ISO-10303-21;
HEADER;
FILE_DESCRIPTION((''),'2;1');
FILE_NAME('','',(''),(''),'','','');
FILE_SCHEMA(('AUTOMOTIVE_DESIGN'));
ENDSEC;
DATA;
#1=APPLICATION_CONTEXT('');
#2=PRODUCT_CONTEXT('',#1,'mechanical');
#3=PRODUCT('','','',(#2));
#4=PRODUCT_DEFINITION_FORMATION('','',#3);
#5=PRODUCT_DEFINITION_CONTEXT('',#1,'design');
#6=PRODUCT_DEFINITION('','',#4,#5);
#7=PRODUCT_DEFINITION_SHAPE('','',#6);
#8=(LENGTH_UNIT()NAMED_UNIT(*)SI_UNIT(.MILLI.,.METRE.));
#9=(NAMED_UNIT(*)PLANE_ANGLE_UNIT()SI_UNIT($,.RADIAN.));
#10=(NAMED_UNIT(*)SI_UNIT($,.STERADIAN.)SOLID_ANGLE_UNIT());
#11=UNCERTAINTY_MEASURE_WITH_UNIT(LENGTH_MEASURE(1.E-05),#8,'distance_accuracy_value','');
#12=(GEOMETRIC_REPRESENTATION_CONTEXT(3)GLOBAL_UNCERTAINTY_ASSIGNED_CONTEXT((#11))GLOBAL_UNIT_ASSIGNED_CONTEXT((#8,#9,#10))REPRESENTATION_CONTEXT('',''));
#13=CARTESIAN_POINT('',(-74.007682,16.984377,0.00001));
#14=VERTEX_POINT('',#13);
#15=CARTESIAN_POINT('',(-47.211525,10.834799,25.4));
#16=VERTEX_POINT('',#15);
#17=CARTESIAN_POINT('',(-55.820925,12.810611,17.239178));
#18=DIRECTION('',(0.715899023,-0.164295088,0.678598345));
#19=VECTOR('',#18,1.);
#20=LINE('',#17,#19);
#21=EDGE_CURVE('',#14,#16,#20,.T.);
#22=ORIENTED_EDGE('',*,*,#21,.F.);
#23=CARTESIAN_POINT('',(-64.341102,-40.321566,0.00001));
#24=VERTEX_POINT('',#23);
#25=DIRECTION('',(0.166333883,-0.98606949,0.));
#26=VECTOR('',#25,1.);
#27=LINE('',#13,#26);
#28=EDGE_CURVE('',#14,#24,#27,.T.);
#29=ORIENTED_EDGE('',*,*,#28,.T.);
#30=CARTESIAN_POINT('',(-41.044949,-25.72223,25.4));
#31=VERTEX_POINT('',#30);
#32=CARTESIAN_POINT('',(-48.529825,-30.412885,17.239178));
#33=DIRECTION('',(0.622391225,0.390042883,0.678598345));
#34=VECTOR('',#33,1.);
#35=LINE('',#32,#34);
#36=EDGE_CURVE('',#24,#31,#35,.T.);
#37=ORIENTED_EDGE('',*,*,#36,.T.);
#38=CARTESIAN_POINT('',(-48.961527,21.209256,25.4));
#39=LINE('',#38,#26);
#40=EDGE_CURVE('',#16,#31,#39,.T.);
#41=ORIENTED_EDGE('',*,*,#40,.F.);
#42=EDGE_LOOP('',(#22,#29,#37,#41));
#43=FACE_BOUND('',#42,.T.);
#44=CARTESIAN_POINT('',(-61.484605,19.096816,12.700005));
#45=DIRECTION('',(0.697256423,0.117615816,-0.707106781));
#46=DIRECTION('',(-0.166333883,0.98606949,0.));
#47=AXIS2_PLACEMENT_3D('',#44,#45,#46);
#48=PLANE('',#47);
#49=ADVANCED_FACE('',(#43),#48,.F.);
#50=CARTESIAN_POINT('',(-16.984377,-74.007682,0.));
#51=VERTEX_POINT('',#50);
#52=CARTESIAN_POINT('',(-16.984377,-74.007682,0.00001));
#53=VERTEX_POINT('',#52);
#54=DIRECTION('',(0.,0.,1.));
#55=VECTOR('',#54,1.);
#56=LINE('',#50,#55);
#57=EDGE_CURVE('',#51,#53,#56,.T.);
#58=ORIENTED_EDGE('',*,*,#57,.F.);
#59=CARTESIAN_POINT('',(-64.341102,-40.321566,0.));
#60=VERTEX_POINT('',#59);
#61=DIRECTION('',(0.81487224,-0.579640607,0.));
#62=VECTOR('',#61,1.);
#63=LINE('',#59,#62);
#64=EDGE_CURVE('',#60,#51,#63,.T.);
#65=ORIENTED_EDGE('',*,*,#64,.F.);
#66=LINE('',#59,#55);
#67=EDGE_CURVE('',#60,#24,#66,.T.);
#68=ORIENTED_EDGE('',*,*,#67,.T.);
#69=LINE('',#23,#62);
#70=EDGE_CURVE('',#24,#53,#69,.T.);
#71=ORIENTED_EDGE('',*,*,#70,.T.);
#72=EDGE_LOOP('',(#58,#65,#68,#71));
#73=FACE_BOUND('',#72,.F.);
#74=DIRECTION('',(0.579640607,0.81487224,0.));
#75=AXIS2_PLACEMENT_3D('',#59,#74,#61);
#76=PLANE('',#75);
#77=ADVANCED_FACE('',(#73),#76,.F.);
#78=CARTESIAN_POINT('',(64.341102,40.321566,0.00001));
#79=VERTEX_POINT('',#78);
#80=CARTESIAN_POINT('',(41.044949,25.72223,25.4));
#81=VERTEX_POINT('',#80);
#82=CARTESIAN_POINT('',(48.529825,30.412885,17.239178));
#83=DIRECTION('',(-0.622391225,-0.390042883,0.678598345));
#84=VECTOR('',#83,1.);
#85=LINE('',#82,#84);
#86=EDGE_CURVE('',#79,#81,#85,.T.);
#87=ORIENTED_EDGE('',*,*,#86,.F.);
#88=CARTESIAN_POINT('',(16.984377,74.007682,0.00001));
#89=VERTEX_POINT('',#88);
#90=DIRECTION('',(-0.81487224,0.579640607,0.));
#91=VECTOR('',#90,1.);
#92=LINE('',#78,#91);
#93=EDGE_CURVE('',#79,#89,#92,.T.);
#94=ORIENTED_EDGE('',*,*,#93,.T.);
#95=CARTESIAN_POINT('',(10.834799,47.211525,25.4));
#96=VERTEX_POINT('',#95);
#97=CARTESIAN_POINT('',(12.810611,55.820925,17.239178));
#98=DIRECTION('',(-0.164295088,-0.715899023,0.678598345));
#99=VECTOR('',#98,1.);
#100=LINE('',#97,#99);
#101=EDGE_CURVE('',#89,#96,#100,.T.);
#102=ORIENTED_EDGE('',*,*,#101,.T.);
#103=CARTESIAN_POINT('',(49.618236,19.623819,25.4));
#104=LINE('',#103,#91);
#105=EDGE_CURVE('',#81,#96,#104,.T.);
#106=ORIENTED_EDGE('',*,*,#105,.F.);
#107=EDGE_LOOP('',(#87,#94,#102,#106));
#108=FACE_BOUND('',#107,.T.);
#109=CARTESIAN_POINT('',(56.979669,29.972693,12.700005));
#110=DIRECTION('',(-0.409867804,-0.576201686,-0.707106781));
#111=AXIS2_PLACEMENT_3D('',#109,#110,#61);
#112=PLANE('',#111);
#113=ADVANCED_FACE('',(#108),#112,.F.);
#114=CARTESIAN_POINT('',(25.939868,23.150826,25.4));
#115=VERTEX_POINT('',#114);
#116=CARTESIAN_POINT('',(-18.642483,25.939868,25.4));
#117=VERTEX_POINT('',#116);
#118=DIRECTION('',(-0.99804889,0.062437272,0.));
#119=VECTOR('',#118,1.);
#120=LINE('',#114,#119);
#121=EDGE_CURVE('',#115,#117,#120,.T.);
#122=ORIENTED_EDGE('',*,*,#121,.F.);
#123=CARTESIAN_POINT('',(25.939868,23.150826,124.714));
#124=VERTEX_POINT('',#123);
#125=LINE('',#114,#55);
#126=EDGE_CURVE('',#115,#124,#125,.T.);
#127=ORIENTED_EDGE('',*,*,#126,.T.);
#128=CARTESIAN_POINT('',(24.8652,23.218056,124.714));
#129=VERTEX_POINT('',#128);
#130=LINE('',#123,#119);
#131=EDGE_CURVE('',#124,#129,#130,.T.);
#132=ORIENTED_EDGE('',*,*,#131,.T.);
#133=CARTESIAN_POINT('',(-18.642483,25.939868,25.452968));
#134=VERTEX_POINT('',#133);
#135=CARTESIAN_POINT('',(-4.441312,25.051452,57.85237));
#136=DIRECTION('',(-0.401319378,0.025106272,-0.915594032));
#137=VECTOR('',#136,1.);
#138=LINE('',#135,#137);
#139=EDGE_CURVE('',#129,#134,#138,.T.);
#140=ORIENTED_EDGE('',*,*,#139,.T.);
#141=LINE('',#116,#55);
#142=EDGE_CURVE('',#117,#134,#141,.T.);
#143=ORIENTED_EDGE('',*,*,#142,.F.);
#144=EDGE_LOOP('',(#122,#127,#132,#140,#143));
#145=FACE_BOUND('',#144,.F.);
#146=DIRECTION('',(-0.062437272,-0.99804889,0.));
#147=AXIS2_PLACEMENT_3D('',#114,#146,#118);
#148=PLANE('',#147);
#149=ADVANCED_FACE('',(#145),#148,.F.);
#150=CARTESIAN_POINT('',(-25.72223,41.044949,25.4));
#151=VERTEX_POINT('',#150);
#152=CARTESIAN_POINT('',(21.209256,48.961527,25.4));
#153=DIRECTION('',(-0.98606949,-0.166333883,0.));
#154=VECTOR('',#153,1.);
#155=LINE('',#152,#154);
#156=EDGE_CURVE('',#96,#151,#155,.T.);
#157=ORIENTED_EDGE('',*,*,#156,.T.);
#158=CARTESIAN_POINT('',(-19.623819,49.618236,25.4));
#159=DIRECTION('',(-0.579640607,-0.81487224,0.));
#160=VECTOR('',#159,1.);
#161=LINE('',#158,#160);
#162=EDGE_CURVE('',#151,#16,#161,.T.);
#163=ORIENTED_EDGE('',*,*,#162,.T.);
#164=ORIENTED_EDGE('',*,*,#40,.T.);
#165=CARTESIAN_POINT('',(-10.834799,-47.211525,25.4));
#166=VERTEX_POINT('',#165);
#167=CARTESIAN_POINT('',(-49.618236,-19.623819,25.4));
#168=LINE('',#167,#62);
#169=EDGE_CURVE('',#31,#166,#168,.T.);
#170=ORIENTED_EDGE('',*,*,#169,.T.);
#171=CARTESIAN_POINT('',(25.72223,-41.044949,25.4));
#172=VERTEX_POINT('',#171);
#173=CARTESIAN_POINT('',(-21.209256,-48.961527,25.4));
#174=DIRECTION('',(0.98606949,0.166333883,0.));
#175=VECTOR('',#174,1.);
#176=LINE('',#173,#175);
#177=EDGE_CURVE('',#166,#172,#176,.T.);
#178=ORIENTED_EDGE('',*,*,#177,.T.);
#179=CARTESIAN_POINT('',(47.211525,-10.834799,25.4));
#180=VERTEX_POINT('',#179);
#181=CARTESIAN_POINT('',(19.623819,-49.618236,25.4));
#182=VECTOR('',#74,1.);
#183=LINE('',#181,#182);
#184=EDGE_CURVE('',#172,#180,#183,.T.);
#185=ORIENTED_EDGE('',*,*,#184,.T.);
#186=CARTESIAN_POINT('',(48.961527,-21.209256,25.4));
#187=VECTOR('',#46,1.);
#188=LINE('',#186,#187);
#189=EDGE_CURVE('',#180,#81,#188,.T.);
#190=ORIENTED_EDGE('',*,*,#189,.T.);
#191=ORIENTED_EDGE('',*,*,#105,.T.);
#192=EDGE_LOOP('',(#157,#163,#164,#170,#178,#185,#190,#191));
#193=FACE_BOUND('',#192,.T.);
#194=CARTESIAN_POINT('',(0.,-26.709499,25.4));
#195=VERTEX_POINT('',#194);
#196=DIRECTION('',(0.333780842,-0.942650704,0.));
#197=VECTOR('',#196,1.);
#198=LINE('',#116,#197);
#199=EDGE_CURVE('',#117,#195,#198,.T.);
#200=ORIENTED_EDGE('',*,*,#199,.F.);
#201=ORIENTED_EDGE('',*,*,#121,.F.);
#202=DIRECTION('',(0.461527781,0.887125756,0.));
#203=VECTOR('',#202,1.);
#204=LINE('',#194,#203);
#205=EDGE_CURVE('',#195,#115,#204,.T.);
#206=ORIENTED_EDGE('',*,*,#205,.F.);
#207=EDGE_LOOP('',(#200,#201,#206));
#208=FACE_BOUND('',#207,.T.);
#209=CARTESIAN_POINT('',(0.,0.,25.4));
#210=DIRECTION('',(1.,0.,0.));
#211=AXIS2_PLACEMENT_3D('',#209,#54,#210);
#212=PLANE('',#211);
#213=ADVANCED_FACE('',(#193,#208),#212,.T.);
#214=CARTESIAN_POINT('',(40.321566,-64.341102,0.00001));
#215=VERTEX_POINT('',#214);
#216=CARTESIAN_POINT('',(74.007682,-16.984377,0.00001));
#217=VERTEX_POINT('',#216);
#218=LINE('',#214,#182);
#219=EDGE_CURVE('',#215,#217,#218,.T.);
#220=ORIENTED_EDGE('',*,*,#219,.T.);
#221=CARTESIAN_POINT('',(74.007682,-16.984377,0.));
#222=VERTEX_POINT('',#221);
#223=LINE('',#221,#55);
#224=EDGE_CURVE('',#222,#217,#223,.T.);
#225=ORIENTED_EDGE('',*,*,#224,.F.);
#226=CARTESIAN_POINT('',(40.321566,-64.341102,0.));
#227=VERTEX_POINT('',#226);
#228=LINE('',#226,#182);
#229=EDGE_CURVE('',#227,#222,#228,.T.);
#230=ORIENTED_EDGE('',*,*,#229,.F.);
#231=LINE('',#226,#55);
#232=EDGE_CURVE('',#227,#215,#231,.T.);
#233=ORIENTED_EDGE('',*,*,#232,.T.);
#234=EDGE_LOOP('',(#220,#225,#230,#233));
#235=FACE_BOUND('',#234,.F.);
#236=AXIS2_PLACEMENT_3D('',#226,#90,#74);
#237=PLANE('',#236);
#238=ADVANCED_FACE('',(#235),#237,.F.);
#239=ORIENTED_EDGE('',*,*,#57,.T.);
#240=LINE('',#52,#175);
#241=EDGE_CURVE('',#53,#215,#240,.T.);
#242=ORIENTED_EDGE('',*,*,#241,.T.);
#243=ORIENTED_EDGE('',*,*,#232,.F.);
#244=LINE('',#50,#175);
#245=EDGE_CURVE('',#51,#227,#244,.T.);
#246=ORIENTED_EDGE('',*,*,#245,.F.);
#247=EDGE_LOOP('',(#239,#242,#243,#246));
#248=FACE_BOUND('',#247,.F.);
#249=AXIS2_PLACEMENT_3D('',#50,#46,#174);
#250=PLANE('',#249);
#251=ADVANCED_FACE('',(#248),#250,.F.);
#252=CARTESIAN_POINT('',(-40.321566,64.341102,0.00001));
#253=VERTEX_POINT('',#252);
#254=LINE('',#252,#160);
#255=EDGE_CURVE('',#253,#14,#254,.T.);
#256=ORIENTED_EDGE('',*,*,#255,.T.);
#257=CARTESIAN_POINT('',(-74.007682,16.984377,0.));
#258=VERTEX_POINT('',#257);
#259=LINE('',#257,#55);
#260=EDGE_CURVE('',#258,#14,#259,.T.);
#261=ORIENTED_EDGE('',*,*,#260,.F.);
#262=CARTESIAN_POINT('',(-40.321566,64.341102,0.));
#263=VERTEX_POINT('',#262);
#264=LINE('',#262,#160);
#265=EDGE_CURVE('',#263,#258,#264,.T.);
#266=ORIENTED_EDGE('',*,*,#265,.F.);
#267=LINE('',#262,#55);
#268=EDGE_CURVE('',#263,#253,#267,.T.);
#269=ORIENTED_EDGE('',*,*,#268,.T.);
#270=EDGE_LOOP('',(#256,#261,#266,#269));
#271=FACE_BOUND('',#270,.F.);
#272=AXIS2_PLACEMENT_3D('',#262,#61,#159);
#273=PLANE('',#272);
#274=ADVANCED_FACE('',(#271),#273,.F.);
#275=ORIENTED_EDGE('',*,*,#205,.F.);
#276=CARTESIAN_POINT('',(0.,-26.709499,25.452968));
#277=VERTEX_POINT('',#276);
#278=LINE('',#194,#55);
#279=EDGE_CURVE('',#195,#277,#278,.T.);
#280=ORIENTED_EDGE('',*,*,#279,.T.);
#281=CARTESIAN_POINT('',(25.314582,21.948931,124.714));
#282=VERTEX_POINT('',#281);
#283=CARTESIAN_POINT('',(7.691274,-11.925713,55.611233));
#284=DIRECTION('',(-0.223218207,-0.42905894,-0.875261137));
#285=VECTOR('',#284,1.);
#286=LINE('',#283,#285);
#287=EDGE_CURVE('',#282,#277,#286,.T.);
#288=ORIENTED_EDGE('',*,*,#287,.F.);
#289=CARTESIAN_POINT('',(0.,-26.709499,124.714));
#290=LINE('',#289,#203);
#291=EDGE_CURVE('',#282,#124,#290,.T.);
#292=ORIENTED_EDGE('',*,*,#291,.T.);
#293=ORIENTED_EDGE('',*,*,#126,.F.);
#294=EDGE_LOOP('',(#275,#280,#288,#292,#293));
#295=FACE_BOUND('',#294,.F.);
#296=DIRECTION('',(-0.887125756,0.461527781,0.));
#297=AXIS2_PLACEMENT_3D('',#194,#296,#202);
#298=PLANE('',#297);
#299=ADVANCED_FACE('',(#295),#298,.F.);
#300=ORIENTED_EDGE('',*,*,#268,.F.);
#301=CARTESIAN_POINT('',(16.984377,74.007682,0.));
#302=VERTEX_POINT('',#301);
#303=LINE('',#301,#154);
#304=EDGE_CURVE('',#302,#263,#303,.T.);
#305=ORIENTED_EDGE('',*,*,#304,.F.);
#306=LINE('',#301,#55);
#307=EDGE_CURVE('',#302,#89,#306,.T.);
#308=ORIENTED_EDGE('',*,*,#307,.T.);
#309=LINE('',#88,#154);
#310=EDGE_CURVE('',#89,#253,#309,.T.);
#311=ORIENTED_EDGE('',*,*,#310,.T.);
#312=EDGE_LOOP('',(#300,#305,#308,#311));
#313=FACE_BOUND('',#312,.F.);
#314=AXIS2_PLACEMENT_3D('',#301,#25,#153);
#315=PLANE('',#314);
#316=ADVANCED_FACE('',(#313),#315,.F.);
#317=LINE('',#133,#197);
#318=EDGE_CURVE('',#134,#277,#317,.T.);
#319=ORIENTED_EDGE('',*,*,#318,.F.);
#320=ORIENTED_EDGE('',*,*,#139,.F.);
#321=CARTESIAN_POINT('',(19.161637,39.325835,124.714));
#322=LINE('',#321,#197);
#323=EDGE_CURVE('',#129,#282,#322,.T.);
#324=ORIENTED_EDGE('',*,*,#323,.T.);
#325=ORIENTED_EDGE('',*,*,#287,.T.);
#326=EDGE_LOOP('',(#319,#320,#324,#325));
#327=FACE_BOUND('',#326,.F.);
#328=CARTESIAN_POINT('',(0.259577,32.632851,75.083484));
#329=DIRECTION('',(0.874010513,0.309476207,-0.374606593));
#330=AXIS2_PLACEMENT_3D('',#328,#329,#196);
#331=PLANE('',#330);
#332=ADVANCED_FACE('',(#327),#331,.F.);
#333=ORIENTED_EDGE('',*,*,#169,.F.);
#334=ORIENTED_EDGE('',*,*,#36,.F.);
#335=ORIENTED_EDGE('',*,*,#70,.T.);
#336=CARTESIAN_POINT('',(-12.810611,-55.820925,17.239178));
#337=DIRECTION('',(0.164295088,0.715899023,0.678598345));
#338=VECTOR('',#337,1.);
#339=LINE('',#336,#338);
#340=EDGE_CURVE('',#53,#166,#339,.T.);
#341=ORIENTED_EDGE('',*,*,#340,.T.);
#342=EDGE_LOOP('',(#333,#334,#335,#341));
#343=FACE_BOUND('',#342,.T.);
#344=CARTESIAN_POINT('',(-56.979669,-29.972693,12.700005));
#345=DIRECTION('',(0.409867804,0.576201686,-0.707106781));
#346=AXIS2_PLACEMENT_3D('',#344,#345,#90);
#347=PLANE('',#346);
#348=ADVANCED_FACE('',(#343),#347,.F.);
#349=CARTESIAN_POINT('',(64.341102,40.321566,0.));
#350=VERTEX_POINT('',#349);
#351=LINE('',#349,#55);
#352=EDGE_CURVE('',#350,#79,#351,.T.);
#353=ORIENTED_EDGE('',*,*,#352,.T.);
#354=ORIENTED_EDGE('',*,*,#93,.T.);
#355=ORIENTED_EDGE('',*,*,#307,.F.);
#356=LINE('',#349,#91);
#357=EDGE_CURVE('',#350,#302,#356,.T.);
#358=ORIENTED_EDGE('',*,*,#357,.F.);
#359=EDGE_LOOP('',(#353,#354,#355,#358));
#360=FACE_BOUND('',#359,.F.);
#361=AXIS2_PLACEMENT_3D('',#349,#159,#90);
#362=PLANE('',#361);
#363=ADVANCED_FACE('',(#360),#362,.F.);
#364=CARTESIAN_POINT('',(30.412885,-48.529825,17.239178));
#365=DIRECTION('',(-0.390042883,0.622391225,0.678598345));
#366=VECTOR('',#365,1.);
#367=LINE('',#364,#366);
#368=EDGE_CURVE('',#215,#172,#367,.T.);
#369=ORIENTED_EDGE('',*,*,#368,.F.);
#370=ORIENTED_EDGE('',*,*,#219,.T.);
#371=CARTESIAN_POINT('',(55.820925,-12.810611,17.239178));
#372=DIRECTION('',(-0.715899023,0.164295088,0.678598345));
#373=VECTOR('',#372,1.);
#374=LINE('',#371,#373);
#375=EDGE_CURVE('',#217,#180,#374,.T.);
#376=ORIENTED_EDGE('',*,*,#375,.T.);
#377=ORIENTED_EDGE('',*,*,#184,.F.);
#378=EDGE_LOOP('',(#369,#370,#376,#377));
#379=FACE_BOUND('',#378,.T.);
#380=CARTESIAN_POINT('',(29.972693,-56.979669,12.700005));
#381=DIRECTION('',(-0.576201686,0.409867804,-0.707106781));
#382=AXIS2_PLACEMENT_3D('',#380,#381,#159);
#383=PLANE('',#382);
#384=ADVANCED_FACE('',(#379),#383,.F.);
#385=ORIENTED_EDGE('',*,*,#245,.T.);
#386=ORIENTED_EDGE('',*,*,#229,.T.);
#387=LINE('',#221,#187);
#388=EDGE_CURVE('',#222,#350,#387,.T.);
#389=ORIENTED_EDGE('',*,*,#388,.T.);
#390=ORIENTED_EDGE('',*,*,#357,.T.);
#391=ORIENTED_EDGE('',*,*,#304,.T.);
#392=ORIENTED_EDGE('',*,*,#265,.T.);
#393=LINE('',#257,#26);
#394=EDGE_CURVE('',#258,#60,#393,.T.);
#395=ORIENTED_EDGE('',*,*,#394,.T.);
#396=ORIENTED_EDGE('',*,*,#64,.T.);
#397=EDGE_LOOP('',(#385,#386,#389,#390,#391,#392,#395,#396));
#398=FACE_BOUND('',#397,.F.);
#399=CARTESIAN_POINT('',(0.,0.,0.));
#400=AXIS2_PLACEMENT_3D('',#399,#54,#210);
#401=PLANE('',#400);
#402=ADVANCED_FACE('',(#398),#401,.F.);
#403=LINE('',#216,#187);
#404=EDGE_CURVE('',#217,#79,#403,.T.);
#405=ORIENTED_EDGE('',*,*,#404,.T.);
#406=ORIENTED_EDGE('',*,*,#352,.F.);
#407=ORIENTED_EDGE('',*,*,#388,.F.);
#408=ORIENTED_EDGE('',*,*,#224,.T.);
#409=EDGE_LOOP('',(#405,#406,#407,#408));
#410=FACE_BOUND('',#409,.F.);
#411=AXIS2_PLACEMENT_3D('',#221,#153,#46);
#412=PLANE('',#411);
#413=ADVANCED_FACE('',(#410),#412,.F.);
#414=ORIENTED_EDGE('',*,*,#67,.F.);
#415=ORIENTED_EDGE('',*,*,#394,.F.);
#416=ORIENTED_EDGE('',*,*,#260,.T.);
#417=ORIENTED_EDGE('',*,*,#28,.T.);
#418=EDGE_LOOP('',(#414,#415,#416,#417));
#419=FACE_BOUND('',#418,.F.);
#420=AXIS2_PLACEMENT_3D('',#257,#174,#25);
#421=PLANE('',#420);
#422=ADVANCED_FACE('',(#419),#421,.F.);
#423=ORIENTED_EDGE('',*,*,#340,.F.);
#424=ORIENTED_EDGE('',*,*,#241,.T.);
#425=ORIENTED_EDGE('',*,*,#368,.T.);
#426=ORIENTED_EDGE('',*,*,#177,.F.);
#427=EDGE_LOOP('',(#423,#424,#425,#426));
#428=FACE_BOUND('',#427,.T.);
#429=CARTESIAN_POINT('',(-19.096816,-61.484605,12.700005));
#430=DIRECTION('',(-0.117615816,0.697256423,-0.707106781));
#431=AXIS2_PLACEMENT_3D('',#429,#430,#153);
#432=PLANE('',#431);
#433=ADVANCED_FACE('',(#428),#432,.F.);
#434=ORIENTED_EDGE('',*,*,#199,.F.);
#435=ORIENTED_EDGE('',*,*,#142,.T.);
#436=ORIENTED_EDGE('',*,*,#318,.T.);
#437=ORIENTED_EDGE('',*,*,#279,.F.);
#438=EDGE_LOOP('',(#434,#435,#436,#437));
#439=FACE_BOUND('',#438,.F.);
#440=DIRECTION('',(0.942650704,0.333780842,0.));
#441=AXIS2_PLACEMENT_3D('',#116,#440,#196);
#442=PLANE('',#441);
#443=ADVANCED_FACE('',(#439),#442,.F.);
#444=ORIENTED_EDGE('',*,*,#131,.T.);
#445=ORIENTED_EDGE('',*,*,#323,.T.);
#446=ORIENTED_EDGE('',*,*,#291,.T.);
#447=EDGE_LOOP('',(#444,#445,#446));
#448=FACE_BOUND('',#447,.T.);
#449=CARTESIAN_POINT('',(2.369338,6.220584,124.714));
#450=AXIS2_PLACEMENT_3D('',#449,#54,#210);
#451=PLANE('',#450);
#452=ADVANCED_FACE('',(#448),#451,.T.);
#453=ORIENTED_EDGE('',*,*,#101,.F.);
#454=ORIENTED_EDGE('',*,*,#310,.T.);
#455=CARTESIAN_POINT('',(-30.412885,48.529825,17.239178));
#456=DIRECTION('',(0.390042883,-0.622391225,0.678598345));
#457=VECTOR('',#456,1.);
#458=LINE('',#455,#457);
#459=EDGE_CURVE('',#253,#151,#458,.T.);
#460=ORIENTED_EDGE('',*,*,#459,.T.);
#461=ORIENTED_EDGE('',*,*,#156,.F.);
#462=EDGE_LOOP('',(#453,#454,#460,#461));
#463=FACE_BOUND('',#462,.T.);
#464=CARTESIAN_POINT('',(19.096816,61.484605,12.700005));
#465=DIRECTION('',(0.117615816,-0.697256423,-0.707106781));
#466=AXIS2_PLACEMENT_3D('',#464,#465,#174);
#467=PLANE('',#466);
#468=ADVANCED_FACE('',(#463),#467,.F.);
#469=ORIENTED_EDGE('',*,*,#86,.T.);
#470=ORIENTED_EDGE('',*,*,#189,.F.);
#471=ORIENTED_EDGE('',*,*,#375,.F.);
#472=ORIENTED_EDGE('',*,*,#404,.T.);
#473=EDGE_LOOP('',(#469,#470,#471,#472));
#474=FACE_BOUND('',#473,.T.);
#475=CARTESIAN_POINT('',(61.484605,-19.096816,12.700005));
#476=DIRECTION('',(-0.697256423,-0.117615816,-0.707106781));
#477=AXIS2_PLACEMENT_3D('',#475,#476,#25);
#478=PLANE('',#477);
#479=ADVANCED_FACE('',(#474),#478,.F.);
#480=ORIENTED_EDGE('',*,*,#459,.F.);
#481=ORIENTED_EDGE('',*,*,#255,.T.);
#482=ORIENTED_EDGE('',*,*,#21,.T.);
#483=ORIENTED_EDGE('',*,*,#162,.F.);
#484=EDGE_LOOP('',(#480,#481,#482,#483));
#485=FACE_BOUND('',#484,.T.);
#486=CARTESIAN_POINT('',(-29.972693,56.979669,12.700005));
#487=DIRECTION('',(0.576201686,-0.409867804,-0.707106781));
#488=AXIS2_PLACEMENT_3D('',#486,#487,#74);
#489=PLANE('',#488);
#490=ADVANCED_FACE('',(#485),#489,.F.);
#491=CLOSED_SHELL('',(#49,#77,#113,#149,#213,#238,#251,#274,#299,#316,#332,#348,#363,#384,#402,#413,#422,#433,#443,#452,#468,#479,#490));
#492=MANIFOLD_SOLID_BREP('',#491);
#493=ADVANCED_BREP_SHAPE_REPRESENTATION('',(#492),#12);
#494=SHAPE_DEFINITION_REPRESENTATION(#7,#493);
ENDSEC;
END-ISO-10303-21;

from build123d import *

# Parameters (mm, degrees)
F1_DEPTH = 25.4
F2_SIZE  = 25.39999
F4_DEPTH = 99.314
F5_SIZE2 = 99.2610316746
F5_SIZE  = 40.10406


# Not quite as in the source:
# - a fillet or chamfer is up to 0.001 mm smaller than in the source, because OpenCascade refuses the exact size


with BuildPart() as f1:
    # F0 (on Top) → F1 (new body)
    with BuildSketch(Plane.XY):
        Polygon((40.3215661799, -64.3411021127), (74.0076824868, -16.984376739), (64.3411021127, 40.3215661799), (16.984376739, 74.0076824868), (-40.3215661799, 64.3411021127), (-74.0076824868, 16.984376739), (-64.3411021127, -40.3215661799), (-16.984376739, -74.0076824868), align=None)
    extrude(amount=F1_DEPTH)

    # F2 (size 25.4 in the source; OpenCascade refuses exactly that, so slightly less here)
    f2_edges = [f1.edges().sort_by_distance(p)[0] for p in [
        (11.668595, -69.174392, 25.4),
        (57.164624, -40.662739, 25.4),
        (69.174392, 11.668595, 25.4),
        (40.662739, 57.164624, 25.4),
        (-11.668595, 69.174392, 25.4),
        (-69.174392, -11.668595, 25.4),
        (-40.662739, -57.164624, 25.4),
        (-57.164624, 40.662739, 25.4),
    ]]
    chamfer(f2_edges, length=F2_SIZE)

    # F3 (on face) → F4 (join)
    with BuildSketch(Plane.XY.offset(25.4)):
        Polygon((-18.6424832791, 25.9398680102), (0, -26.7094988376), (25.9398680102, 23.150825873), align=None)
    extrude(amount=F4_DEPTH)

    # F5
    f5_edges = [f1.edges().sort_by_distance(p)[0] for p in [
        (-9.321242, -0.384815, 124.714),
    ]]
    f5_side = f1.faces().sort_by_distance((2.432462, 7.460398, 124.714))[0]
    chamfer(f5_edges, length=F5_SIZE, length2=F5_SIZE2, reference=f5_side)


solid = f1.part
